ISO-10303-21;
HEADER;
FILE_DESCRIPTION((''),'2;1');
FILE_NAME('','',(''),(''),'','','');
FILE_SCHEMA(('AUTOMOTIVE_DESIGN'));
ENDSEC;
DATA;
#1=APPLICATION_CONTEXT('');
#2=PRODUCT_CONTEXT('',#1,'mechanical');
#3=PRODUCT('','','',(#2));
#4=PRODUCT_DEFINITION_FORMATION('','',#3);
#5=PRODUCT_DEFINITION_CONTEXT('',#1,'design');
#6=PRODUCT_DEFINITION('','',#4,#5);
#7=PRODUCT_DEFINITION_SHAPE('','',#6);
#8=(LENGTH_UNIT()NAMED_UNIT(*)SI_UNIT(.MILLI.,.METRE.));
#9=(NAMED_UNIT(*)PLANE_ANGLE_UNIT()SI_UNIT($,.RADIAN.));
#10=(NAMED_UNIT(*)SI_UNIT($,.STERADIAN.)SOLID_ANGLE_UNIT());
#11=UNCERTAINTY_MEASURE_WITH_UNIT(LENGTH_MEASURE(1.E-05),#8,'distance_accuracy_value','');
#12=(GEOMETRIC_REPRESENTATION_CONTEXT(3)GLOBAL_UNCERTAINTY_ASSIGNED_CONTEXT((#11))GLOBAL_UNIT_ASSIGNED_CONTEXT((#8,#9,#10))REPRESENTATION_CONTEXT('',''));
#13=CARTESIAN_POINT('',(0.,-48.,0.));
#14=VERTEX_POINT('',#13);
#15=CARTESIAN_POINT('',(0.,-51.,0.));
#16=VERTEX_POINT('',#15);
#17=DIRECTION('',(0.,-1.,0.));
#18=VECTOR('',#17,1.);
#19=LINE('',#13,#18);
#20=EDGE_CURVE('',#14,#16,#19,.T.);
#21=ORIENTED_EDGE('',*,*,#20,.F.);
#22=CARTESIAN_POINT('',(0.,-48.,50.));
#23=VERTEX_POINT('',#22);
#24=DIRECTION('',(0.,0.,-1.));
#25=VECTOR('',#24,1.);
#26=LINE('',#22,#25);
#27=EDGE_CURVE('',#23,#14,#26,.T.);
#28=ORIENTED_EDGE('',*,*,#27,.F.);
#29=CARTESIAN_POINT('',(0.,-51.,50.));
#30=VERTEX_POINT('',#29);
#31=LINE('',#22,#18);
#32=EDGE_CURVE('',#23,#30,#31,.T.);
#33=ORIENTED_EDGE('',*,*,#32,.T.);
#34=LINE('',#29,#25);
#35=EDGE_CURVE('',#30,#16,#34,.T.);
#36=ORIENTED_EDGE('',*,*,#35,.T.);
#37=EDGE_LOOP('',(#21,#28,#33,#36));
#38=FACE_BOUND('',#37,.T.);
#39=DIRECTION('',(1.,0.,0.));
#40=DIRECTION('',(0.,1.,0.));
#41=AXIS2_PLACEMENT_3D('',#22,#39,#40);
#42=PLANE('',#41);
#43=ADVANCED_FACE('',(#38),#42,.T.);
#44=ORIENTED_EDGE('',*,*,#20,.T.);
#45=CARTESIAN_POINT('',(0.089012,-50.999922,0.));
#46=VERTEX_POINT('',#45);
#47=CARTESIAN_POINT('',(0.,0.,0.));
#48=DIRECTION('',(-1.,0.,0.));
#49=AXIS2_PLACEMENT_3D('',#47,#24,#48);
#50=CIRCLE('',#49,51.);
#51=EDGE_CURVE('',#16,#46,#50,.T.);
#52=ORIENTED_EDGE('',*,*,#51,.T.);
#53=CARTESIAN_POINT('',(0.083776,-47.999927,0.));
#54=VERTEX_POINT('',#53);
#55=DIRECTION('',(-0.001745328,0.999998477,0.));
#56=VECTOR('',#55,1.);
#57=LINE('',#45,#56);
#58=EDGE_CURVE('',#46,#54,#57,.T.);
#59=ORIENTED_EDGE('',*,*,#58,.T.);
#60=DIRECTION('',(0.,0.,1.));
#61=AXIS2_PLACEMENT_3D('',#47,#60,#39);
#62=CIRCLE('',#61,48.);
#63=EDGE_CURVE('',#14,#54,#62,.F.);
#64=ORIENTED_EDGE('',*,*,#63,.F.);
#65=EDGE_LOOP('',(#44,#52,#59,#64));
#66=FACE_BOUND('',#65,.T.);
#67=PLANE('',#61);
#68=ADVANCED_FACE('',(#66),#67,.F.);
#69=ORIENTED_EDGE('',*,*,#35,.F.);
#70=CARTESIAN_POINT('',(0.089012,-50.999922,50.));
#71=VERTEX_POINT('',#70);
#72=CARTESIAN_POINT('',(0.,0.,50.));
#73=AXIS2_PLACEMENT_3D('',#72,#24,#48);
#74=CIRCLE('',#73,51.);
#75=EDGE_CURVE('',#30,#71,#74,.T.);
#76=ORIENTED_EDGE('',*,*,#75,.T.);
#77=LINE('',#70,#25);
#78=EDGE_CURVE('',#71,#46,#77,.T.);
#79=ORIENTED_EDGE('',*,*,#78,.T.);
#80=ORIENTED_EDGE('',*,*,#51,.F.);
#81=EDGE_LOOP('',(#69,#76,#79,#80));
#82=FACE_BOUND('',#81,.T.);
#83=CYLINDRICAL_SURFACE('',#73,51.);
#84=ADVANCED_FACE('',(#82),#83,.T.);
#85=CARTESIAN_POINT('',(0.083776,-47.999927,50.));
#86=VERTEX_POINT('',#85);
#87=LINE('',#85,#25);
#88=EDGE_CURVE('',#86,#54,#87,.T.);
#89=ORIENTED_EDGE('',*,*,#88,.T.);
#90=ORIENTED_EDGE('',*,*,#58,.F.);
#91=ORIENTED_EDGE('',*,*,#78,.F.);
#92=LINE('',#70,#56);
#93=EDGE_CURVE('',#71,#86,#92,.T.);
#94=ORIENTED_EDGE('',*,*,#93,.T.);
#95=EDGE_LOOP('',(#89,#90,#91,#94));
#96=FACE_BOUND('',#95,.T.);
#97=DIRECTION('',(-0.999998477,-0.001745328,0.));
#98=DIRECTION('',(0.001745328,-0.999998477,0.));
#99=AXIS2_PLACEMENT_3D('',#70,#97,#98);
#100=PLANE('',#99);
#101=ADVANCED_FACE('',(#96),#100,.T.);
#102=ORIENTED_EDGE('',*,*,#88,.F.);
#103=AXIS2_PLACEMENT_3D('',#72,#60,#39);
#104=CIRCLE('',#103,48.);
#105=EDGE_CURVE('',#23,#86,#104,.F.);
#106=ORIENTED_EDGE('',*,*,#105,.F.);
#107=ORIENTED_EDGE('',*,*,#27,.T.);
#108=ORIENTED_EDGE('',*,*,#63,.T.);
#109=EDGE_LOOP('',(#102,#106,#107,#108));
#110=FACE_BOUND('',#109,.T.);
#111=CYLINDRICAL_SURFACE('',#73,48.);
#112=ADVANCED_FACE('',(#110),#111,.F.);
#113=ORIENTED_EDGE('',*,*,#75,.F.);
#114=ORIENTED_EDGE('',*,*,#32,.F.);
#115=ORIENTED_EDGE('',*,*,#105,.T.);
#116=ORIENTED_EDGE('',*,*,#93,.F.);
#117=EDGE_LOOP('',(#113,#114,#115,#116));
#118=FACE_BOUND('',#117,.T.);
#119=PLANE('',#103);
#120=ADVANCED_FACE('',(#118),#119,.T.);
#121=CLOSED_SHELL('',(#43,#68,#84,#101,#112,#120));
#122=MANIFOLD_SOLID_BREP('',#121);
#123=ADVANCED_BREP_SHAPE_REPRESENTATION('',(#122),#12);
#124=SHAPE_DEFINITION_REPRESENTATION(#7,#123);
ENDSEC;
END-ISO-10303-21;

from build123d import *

# Parameters (mm, degrees)
BASE_FLANGE1_DEPTH = 50


# Sheet-metal steps are written as plain solids
with BuildPart() as part:
    # Sketch2 → Base-Flange1 (new body)
    with BuildSketch(Plane.XY):
        with BuildLine():
            ThreePointArc((0, -51), (-0.04450589, 50.999980581), (0.089011747, -50.999922323))
            Line((0.089011747, -50.999922323), (0.083775762, -47.999926892))
            ThreePointArc((0.083775762, -47.999926892), (-0.041887897, 47.999981723), (0, -48))
            Line((0, -48), (0, -51))
        make_face()
    extrude(amount=BASE_FLANGE1_DEPTH)


solid = part.part
